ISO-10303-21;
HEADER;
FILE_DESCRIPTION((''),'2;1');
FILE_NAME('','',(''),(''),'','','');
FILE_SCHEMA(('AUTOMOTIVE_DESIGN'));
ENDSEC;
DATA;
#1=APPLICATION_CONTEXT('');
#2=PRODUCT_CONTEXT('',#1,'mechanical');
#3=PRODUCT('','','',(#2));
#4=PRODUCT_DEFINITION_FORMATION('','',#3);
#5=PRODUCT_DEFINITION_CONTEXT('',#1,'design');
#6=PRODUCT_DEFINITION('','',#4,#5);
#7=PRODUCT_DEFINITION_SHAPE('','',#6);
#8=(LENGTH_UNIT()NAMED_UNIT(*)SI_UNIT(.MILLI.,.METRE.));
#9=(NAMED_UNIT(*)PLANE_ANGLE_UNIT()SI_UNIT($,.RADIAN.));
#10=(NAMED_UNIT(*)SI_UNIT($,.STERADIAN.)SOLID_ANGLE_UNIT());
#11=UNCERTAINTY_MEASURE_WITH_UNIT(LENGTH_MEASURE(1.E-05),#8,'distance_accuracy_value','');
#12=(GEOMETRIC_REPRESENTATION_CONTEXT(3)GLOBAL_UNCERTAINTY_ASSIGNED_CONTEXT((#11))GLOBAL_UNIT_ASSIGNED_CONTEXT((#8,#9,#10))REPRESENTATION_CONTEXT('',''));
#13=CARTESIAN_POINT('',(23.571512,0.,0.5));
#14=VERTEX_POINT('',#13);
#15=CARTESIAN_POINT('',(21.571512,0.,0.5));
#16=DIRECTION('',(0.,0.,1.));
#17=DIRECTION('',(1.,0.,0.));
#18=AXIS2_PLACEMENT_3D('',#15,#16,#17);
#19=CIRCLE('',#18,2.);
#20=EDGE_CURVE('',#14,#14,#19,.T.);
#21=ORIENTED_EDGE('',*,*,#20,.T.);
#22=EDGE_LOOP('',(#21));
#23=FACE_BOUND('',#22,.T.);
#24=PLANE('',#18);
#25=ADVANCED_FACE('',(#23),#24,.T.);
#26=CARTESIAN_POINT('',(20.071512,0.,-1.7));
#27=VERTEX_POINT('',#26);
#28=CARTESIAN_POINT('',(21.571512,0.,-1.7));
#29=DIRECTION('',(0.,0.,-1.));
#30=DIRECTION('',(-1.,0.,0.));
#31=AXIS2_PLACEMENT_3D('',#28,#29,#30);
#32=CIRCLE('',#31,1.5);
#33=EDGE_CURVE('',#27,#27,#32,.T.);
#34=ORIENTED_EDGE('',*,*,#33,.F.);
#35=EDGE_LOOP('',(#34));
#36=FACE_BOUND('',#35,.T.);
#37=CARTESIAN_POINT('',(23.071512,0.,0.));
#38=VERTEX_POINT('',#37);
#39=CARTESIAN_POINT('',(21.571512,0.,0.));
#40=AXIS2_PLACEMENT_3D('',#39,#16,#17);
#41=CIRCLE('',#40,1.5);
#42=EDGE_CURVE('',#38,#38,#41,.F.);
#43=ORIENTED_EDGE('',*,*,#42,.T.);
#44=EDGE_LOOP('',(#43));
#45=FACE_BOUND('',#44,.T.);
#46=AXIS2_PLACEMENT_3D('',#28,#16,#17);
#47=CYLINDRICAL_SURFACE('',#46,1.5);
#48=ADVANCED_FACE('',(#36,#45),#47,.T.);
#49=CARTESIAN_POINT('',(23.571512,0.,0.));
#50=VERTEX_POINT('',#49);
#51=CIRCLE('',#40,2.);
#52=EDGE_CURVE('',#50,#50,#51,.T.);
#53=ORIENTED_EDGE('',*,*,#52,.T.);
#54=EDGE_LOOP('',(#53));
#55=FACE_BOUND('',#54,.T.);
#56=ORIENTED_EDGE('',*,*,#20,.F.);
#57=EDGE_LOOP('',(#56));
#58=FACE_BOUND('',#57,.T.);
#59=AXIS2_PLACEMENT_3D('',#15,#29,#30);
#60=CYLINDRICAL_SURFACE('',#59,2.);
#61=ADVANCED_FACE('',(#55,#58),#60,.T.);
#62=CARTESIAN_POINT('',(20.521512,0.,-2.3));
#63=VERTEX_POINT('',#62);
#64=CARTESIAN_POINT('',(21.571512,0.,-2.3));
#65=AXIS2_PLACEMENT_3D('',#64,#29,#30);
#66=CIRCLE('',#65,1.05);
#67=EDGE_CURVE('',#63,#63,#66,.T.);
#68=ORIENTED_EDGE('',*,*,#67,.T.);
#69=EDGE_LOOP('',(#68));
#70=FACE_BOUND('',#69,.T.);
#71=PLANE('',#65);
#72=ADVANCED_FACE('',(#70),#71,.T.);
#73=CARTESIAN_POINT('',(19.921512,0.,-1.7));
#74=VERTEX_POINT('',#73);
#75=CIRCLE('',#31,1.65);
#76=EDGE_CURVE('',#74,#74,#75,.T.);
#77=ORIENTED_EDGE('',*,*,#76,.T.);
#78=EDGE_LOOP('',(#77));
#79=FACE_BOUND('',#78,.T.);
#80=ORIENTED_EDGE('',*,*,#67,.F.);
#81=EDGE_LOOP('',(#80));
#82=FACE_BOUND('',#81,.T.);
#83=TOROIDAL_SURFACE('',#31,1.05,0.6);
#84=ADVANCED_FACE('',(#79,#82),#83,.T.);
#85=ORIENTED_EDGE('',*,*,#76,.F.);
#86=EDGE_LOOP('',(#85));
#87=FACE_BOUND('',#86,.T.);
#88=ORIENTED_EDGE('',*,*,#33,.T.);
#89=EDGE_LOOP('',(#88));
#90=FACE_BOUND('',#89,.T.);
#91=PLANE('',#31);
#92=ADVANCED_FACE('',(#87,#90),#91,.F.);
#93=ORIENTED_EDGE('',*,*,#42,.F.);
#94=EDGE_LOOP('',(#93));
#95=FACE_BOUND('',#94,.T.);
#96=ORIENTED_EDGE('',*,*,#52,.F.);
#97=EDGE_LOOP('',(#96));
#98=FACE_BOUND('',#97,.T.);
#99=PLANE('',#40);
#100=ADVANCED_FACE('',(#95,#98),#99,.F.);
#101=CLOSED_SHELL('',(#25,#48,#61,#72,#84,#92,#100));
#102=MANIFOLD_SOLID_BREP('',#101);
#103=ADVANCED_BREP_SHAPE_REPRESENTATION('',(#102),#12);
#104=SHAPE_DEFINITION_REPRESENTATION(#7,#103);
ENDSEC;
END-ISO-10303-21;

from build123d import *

# Parameters (mm, degrees)
IZIM1_R                     = 2
Y_KSEKLIK_EKSTR_ZYON1_DEPTH = 0.5
IZIM2_R                     = 1.5
Y_KSEKLIK_EKSTR_ZYON2_DEPTH = 1.7
IZIM3_R                     = 1.65
Y_KSEKLIK_EKSTR_ZYON3_DEPTH = 0.6
RADYUS1_R                   = 0.6


with BuildPart() as part:
    # Çizim1 → Yükseklik-Ekstrüzyon1 (new body)
    with BuildSketch(Plane.XY):
        with Locations((21.571512145, 0)):
            Circle(IZIM1_R)
    extrude(amount=Y_KSEKLIK_EKSTR_ZYON1_DEPTH)

    # Çizim2 → Yükseklik-Ekstrüzyon2 (add)
    with BuildSketch(Plane(origin=(0, 0, 0), x_dir=(-1, 0, 0), z_dir=(0, 0, -1))):
        with Locations(Location((-21.571512145, 0, 0), (0, 0, 180))):
            Circle(IZIM2_R)
    extrude(amount=Y_KSEKLIK_EKSTR_ZYON2_DEPTH)

    # Çizim3 → Yükseklik-Ekstrüzyon3 (add)
    with BuildSketch(Plane(origin=(0, 0, -1.7), x_dir=(-1, 0, 0), z_dir=(0, 0, -1))):
        with Locations((-21.571512145, 0)):
            Circle(IZIM3_R)
    extrude(amount=Y_KSEKLIK_EKSTR_ZYON3_DEPTH)

    # Radyus1
    radyus1_edges = [part.edges().sort_by_distance(p)[0] for p in [
        (23.221512145, 0, -2.3),
    ]]
    fillet(radyus1_edges, radius=RADYUS1_R - 0.0001)  # a hair under: the kernel refuses the full size


solid = part.part
